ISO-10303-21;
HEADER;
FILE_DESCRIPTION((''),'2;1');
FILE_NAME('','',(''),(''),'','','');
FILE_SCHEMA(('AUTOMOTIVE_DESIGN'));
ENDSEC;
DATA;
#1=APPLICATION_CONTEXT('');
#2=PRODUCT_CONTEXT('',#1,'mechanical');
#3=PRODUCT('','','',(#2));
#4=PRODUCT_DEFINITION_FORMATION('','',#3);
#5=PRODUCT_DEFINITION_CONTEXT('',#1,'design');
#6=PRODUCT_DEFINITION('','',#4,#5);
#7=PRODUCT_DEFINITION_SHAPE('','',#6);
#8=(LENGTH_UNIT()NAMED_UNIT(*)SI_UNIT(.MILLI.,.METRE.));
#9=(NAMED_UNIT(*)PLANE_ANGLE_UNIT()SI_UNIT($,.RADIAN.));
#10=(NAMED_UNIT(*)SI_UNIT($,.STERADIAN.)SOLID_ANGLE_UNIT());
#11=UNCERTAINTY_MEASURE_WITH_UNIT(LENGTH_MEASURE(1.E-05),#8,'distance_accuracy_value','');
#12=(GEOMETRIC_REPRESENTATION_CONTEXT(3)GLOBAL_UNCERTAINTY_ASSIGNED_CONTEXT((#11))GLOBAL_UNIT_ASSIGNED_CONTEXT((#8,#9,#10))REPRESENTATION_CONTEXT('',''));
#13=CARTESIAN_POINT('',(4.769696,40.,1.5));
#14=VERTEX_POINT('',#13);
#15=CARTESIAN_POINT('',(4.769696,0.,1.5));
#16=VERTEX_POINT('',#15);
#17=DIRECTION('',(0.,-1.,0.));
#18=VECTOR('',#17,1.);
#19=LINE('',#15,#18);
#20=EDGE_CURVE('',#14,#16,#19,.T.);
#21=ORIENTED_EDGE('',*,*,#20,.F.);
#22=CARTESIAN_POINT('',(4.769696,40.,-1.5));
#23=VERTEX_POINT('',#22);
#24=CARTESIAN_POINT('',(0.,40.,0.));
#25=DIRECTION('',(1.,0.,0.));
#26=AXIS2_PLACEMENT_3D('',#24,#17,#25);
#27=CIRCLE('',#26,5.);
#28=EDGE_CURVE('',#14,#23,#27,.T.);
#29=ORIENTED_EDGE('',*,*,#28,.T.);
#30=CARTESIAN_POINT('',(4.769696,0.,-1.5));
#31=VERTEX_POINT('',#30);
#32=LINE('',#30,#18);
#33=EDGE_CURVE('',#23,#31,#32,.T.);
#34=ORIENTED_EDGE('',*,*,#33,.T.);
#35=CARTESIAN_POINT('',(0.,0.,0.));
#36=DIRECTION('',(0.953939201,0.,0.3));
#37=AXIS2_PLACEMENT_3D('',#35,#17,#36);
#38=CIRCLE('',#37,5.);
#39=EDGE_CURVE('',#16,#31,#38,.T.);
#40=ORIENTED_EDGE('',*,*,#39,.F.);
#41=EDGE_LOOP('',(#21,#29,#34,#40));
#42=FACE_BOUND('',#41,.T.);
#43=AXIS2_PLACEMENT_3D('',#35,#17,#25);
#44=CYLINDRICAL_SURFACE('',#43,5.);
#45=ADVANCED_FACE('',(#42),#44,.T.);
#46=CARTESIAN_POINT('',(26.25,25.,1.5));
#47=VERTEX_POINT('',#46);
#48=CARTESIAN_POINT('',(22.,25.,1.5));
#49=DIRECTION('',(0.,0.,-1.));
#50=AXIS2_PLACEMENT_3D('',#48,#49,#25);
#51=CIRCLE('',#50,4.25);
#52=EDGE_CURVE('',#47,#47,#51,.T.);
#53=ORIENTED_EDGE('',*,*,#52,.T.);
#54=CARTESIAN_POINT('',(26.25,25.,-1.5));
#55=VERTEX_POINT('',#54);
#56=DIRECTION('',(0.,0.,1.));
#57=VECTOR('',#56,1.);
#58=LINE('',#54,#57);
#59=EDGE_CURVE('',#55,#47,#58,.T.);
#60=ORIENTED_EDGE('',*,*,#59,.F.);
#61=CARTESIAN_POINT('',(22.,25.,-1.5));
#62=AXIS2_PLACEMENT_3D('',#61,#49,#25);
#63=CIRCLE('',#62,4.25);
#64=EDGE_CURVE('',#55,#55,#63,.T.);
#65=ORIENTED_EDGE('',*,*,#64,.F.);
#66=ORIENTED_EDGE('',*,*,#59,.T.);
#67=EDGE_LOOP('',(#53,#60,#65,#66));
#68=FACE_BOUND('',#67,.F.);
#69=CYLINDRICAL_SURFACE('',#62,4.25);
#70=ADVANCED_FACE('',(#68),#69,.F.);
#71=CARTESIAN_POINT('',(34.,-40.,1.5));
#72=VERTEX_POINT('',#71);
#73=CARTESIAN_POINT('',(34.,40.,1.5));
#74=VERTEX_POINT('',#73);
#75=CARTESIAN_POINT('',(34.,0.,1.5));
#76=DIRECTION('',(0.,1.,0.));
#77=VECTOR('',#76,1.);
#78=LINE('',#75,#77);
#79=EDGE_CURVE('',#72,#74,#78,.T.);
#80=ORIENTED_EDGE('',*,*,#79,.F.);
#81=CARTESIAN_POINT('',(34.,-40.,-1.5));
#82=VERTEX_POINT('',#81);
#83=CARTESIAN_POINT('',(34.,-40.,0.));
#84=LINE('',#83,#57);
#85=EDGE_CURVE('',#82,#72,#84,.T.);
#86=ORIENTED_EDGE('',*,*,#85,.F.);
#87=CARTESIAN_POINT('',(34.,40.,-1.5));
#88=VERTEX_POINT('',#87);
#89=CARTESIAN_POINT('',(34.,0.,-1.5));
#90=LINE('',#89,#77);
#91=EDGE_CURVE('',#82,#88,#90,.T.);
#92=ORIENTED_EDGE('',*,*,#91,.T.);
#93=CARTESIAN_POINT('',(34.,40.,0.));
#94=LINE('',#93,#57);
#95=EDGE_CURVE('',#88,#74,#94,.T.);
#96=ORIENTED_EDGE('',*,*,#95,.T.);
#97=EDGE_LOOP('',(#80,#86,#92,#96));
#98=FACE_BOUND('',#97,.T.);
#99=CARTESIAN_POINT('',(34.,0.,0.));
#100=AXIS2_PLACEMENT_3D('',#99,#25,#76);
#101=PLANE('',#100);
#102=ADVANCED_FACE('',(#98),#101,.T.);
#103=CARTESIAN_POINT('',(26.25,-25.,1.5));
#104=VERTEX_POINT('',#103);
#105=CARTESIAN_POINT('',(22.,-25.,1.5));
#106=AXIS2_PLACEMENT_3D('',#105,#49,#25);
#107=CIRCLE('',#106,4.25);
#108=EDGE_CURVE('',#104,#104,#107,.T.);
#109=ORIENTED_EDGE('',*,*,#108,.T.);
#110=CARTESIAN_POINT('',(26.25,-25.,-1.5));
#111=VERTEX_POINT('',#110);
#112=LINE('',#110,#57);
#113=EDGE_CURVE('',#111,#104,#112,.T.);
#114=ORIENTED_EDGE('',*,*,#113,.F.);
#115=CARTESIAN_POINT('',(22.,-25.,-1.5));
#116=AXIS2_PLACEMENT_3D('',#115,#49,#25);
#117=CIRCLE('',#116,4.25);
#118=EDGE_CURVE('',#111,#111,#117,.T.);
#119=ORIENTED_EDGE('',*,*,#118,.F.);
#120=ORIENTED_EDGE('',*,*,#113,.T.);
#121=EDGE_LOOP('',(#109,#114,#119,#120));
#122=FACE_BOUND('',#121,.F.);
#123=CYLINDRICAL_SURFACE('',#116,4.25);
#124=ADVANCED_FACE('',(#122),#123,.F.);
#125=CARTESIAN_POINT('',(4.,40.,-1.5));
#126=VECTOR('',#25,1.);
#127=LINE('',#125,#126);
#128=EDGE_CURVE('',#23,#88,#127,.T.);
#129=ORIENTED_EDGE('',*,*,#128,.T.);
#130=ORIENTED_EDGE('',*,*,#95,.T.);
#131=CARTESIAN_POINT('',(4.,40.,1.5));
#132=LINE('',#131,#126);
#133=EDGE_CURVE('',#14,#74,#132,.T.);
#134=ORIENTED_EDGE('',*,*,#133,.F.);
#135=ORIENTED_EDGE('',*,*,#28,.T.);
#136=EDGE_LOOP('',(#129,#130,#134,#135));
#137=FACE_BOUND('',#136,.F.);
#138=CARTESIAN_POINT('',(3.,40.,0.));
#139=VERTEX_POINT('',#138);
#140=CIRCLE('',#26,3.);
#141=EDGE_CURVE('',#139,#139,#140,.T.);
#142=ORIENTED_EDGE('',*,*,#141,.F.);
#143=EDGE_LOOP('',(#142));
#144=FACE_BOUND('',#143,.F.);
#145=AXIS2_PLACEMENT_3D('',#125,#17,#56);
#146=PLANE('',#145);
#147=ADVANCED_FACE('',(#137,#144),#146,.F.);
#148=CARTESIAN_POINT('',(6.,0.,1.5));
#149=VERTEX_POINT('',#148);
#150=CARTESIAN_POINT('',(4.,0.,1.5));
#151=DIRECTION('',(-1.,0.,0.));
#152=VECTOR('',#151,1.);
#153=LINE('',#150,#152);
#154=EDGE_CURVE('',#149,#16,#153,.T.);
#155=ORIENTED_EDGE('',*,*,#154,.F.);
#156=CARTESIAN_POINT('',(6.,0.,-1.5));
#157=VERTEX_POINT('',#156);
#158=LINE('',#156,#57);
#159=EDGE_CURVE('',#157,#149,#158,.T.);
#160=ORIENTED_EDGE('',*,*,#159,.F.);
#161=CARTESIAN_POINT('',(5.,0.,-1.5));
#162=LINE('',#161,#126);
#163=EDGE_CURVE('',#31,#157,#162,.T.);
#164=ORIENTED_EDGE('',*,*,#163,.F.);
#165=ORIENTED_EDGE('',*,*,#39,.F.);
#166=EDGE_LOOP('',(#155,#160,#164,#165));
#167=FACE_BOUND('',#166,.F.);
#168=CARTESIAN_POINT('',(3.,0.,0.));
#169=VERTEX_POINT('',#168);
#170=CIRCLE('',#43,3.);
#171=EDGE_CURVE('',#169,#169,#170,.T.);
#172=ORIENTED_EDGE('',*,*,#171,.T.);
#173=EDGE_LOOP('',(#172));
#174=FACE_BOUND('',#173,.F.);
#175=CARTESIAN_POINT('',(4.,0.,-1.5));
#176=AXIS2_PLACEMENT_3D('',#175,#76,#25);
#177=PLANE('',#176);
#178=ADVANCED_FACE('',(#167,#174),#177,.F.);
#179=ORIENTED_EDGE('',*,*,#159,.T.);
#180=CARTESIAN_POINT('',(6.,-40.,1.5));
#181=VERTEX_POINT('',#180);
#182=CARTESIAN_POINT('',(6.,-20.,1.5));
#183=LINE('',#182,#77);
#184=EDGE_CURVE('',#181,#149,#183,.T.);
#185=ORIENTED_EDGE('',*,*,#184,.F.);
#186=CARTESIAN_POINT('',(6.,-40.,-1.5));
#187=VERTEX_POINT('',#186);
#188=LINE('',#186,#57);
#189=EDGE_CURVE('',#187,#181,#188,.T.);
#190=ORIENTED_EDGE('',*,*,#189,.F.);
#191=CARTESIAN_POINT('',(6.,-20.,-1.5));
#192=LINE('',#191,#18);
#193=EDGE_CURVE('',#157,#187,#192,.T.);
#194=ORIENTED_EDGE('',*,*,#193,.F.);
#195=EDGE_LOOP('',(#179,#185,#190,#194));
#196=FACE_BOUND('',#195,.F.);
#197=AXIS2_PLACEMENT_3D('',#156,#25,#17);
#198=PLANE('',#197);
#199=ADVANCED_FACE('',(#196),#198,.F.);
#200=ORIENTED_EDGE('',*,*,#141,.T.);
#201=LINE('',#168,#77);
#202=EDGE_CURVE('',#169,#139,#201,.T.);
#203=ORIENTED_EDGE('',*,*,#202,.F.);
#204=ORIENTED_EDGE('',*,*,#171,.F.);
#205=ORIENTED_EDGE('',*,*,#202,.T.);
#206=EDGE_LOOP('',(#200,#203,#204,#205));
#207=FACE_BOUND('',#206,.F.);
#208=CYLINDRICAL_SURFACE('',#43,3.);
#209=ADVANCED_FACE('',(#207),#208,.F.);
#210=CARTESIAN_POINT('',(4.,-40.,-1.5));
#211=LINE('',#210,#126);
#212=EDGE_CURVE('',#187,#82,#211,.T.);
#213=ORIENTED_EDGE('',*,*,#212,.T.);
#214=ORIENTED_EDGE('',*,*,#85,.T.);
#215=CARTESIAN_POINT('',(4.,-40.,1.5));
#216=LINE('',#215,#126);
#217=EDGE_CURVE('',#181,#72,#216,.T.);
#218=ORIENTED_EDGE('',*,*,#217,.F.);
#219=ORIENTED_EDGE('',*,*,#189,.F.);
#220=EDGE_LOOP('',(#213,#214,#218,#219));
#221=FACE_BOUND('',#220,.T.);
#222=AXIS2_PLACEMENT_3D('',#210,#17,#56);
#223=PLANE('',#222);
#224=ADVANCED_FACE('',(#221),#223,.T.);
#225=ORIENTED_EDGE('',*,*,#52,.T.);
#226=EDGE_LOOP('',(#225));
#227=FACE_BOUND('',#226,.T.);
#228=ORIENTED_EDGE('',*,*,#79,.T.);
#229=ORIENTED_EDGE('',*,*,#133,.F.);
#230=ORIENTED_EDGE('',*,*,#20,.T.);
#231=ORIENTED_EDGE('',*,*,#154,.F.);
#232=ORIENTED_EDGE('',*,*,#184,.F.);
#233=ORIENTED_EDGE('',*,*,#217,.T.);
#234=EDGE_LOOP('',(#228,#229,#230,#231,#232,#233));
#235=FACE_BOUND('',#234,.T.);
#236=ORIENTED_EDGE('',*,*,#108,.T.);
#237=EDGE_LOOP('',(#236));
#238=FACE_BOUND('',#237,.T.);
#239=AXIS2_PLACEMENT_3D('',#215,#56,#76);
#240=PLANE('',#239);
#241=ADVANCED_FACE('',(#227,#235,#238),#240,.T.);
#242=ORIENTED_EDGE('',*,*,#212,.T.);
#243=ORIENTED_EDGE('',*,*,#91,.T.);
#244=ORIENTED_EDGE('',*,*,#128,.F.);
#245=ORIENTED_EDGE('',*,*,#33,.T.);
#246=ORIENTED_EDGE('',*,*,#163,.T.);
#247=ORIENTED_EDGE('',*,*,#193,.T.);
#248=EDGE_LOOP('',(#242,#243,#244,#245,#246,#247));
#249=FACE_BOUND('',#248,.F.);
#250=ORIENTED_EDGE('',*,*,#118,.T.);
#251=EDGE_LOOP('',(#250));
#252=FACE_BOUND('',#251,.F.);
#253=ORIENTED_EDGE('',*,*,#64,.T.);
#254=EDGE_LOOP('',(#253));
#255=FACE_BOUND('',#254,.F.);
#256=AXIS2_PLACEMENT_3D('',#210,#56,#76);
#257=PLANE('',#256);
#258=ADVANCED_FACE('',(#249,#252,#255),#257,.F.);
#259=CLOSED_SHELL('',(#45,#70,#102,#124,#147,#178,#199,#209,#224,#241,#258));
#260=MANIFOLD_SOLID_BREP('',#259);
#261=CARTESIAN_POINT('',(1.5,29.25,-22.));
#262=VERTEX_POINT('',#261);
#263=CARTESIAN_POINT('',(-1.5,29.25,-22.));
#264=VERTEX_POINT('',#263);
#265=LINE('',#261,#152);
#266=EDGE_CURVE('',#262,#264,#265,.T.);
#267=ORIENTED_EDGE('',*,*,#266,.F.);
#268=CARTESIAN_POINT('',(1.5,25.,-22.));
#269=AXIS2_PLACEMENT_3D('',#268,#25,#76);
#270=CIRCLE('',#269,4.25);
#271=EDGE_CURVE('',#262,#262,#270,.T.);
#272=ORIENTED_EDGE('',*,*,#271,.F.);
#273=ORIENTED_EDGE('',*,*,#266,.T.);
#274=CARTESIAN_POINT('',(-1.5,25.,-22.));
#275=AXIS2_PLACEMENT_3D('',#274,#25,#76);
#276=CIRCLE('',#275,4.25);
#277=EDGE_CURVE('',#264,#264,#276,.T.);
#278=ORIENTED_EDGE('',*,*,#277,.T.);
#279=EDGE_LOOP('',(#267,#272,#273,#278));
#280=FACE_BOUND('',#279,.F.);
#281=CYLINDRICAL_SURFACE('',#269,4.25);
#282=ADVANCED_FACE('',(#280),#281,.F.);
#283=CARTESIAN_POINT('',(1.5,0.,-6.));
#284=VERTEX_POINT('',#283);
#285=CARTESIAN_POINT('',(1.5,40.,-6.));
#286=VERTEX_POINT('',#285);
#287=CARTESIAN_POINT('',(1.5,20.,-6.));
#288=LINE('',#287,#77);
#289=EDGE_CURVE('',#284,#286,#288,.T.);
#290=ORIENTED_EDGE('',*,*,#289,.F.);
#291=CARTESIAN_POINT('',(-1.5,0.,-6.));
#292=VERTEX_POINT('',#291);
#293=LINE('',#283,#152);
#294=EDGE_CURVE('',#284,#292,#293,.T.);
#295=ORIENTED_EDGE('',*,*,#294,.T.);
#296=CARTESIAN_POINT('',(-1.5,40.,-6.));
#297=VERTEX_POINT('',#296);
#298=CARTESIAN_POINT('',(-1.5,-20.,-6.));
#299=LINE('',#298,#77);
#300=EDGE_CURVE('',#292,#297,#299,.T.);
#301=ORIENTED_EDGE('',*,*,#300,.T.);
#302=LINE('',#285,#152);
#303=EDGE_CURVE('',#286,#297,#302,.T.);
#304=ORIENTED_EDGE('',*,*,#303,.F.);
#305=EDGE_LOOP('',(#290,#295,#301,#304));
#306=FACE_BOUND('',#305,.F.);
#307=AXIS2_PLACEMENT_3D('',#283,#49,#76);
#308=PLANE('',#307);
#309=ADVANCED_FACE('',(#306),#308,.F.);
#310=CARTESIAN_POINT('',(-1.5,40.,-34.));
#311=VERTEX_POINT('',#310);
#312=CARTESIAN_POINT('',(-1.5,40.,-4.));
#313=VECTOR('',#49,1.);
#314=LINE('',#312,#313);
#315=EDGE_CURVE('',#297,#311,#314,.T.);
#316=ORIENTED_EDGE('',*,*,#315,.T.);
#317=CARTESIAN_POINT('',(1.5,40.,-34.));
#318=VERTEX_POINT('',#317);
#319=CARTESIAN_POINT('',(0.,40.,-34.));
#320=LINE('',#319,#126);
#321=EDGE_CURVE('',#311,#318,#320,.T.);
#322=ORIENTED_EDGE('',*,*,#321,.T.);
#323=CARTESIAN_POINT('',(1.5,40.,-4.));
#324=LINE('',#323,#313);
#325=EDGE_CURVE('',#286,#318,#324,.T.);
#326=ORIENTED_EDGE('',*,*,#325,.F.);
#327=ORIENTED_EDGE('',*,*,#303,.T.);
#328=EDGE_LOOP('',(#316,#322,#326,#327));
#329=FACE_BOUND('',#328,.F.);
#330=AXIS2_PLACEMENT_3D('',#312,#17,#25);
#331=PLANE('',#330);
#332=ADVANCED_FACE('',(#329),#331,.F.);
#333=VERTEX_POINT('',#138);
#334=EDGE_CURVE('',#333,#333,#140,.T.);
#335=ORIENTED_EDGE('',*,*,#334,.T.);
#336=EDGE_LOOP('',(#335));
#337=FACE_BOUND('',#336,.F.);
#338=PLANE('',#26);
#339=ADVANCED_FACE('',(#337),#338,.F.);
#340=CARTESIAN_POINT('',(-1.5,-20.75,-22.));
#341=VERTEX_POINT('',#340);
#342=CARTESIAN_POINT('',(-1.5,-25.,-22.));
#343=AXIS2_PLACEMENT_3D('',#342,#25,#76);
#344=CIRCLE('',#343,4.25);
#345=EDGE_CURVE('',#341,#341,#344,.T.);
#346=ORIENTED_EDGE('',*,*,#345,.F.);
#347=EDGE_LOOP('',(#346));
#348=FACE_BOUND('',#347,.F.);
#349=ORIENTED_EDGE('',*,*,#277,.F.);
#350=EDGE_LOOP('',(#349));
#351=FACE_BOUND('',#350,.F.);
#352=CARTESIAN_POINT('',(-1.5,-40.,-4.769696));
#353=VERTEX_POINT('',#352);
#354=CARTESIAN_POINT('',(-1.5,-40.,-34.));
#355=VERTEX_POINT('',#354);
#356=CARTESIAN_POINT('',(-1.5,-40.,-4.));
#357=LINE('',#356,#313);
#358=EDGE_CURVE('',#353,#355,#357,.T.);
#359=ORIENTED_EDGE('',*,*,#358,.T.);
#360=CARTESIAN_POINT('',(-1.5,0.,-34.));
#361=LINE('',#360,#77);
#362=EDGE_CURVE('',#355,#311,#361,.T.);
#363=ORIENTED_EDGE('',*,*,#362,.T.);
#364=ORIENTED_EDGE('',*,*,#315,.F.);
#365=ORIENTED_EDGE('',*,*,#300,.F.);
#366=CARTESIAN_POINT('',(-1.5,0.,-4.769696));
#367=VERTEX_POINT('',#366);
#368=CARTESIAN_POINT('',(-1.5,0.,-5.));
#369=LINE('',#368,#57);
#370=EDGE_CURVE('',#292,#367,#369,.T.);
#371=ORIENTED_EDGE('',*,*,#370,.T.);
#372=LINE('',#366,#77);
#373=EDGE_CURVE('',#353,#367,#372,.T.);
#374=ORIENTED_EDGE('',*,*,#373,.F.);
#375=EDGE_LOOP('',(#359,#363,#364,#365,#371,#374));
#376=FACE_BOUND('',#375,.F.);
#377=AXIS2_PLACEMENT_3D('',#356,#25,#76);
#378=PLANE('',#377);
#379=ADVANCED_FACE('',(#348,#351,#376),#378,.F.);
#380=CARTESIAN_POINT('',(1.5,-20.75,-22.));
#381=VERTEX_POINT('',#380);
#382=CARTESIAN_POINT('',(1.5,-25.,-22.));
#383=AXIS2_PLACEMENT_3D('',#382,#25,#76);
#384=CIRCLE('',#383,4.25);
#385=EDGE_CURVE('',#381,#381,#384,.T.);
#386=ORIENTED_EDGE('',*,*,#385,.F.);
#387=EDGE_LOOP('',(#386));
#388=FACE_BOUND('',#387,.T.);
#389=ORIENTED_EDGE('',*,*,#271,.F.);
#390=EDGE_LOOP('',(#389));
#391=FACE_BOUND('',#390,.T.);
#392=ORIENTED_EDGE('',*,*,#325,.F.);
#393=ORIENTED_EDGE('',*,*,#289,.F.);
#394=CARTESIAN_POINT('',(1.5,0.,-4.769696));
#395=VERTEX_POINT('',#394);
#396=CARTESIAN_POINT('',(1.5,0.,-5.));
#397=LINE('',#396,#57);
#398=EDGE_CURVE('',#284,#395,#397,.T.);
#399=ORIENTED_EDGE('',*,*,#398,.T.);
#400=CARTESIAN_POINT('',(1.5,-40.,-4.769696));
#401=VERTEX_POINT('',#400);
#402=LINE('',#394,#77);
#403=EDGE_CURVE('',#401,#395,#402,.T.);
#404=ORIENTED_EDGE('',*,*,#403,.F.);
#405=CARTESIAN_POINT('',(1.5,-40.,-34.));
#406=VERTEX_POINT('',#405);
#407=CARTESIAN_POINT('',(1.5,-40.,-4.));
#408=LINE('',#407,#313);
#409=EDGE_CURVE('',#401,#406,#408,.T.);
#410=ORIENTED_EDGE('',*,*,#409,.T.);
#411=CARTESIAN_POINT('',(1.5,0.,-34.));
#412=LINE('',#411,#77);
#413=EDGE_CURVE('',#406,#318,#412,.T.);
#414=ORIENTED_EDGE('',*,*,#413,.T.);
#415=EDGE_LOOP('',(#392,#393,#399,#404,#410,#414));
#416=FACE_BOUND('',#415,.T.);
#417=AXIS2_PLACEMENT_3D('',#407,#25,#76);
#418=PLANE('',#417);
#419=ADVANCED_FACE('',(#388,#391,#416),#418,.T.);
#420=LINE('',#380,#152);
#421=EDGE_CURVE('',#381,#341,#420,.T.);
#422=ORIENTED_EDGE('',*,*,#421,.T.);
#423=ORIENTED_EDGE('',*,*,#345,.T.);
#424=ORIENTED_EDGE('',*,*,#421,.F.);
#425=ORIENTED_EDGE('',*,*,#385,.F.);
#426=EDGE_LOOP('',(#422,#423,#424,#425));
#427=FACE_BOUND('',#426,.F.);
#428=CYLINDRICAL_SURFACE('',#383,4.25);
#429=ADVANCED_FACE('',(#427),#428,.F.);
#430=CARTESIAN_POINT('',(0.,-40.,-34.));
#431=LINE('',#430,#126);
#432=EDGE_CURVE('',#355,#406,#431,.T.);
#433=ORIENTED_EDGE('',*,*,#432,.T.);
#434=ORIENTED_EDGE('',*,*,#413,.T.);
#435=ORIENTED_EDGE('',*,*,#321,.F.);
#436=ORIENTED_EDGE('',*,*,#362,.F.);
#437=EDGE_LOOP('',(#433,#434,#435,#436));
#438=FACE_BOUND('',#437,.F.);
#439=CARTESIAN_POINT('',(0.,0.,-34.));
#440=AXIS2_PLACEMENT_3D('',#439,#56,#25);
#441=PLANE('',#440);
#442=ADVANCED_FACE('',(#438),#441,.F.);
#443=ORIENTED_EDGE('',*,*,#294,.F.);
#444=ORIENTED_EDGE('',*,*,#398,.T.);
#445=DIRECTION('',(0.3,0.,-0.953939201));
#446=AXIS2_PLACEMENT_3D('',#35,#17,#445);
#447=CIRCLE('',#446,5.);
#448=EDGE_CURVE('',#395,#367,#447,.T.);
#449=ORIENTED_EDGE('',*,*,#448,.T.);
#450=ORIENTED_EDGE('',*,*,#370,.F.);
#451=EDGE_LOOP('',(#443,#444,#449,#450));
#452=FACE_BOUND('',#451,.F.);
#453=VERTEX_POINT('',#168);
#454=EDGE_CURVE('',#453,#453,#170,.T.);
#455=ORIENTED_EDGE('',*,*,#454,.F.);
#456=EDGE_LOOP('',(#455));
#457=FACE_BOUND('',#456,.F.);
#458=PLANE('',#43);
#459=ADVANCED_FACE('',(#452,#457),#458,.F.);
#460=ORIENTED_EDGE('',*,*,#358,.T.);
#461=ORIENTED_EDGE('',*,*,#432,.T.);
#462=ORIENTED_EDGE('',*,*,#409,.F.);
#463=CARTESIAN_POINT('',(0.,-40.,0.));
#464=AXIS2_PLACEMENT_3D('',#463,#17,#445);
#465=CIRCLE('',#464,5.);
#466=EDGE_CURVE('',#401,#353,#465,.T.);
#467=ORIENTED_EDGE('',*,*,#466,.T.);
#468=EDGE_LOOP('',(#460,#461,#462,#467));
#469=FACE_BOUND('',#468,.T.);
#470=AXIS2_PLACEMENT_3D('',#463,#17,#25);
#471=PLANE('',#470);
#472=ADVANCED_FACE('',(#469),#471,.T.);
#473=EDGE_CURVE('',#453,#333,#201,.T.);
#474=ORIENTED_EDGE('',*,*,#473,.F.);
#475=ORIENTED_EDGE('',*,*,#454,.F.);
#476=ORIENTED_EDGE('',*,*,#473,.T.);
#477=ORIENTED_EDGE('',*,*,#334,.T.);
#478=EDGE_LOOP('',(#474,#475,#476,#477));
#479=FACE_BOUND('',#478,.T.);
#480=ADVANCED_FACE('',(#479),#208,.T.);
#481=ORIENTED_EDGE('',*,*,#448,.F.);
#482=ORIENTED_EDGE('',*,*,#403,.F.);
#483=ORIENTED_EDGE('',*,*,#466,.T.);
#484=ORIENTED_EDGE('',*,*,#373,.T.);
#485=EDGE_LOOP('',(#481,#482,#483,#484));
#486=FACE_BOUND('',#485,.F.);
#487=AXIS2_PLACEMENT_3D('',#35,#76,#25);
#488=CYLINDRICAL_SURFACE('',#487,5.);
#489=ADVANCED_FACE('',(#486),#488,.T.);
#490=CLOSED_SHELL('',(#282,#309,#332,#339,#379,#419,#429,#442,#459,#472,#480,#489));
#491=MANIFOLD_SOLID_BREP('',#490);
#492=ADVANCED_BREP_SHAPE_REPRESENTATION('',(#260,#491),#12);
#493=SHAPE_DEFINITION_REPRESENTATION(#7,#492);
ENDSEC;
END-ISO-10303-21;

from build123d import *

# Parameters (mm, degrees)
F0_R      = 5
F1_DEPTH  = 40
F2_R      = 3
F3_DEPTH  = 40
F5_W      = 3
F5_H      = 80
F6_DEPTH  = 30
F7_R      = 5
F7_R_2    = 3
F8_DEPTH  = 40
F10_W     = 80
F10_H     = 3
F11_DEPTH = 30
F12_W     = 40
F12_H     = 2
F13_DEPTH = 25
F14_W     = 2
F14_H     = 40
F15_DEPTH = 25
F16_R     = 4.25
F17_DEPTH = 25
F18_R     = 4.25
F19_DEPTH = 25


with BuildPart() as f1:
    # F0 (on Front) → F1 (new body)
    with BuildSketch(Plane.XZ):
        Circle(F0_R)
    extrude(amount=F1_DEPTH)

    # F2 (on Front) → F3 (join)
    with BuildSketch(Plane.XZ):
        Circle(F2_R)
    extrude(amount=-F3_DEPTH)

    # F5 (on offset) → F6 (join)
    with BuildSketch(Plane.XY.offset(-4)):
        Rectangle(F5_W, F5_H)
    extrude(amount=-F6_DEPTH)

    # F12 (on face) → F13 (cut)
    with BuildSketch(Plane.YZ.offset(1.5)):
        with Locations((20, -5)):
            Rectangle(F12_W, F12_H)
    extrude(amount=-F13_DEPTH, mode=Mode.SUBTRACT)

    # F18 (on face) → F19 (cut)
    with BuildSketch(Plane.YZ.offset(1.5)):
        with Locations((-25, -22)):
            Circle(F18_R)
        with Locations((25, -22)):
            Circle(F18_R)
    extrude(amount=-F19_DEPTH, mode=Mode.SUBTRACT)


with BuildPart() as f8:
    # F7 (on Front) → F8 (new body)
    with BuildSketch(Plane.XZ):
        Circle(F7_R)
        Circle(F7_R_2, mode=Mode.SUBTRACT)
    extrude(amount=-F8_DEPTH)

    # F10 (on offset) → F11 (join)
    with BuildSketch(Plane.YZ.offset(4)):
        Rectangle(F10_W, F10_H)
    extrude(amount=F11_DEPTH)

    # F14 (on face) → F15 (cut)
    with BuildSketch(Plane(origin=(0, 0, -1.5), x_dir=(1, 0, 0), z_dir=(0, 0, -1))):
        with Locations((5, 20)):
            Rectangle(F14_W, F14_H)
    extrude(amount=-F15_DEPTH, mode=Mode.SUBTRACT)

    # F16 (on face) → F17 (cut)
    with BuildSketch(Plane(origin=(0, 0, -1.5), x_dir=(1, 0, 0), z_dir=(0, 0, -1))):
        with Locations((22, 25)):
            Circle(F16_R)
        with Locations((22, -25)):
            Circle(F16_R)
    extrude(amount=-F17_DEPTH, mode=Mode.SUBTRACT)


solid = Compound([f1.part, f8.part])
